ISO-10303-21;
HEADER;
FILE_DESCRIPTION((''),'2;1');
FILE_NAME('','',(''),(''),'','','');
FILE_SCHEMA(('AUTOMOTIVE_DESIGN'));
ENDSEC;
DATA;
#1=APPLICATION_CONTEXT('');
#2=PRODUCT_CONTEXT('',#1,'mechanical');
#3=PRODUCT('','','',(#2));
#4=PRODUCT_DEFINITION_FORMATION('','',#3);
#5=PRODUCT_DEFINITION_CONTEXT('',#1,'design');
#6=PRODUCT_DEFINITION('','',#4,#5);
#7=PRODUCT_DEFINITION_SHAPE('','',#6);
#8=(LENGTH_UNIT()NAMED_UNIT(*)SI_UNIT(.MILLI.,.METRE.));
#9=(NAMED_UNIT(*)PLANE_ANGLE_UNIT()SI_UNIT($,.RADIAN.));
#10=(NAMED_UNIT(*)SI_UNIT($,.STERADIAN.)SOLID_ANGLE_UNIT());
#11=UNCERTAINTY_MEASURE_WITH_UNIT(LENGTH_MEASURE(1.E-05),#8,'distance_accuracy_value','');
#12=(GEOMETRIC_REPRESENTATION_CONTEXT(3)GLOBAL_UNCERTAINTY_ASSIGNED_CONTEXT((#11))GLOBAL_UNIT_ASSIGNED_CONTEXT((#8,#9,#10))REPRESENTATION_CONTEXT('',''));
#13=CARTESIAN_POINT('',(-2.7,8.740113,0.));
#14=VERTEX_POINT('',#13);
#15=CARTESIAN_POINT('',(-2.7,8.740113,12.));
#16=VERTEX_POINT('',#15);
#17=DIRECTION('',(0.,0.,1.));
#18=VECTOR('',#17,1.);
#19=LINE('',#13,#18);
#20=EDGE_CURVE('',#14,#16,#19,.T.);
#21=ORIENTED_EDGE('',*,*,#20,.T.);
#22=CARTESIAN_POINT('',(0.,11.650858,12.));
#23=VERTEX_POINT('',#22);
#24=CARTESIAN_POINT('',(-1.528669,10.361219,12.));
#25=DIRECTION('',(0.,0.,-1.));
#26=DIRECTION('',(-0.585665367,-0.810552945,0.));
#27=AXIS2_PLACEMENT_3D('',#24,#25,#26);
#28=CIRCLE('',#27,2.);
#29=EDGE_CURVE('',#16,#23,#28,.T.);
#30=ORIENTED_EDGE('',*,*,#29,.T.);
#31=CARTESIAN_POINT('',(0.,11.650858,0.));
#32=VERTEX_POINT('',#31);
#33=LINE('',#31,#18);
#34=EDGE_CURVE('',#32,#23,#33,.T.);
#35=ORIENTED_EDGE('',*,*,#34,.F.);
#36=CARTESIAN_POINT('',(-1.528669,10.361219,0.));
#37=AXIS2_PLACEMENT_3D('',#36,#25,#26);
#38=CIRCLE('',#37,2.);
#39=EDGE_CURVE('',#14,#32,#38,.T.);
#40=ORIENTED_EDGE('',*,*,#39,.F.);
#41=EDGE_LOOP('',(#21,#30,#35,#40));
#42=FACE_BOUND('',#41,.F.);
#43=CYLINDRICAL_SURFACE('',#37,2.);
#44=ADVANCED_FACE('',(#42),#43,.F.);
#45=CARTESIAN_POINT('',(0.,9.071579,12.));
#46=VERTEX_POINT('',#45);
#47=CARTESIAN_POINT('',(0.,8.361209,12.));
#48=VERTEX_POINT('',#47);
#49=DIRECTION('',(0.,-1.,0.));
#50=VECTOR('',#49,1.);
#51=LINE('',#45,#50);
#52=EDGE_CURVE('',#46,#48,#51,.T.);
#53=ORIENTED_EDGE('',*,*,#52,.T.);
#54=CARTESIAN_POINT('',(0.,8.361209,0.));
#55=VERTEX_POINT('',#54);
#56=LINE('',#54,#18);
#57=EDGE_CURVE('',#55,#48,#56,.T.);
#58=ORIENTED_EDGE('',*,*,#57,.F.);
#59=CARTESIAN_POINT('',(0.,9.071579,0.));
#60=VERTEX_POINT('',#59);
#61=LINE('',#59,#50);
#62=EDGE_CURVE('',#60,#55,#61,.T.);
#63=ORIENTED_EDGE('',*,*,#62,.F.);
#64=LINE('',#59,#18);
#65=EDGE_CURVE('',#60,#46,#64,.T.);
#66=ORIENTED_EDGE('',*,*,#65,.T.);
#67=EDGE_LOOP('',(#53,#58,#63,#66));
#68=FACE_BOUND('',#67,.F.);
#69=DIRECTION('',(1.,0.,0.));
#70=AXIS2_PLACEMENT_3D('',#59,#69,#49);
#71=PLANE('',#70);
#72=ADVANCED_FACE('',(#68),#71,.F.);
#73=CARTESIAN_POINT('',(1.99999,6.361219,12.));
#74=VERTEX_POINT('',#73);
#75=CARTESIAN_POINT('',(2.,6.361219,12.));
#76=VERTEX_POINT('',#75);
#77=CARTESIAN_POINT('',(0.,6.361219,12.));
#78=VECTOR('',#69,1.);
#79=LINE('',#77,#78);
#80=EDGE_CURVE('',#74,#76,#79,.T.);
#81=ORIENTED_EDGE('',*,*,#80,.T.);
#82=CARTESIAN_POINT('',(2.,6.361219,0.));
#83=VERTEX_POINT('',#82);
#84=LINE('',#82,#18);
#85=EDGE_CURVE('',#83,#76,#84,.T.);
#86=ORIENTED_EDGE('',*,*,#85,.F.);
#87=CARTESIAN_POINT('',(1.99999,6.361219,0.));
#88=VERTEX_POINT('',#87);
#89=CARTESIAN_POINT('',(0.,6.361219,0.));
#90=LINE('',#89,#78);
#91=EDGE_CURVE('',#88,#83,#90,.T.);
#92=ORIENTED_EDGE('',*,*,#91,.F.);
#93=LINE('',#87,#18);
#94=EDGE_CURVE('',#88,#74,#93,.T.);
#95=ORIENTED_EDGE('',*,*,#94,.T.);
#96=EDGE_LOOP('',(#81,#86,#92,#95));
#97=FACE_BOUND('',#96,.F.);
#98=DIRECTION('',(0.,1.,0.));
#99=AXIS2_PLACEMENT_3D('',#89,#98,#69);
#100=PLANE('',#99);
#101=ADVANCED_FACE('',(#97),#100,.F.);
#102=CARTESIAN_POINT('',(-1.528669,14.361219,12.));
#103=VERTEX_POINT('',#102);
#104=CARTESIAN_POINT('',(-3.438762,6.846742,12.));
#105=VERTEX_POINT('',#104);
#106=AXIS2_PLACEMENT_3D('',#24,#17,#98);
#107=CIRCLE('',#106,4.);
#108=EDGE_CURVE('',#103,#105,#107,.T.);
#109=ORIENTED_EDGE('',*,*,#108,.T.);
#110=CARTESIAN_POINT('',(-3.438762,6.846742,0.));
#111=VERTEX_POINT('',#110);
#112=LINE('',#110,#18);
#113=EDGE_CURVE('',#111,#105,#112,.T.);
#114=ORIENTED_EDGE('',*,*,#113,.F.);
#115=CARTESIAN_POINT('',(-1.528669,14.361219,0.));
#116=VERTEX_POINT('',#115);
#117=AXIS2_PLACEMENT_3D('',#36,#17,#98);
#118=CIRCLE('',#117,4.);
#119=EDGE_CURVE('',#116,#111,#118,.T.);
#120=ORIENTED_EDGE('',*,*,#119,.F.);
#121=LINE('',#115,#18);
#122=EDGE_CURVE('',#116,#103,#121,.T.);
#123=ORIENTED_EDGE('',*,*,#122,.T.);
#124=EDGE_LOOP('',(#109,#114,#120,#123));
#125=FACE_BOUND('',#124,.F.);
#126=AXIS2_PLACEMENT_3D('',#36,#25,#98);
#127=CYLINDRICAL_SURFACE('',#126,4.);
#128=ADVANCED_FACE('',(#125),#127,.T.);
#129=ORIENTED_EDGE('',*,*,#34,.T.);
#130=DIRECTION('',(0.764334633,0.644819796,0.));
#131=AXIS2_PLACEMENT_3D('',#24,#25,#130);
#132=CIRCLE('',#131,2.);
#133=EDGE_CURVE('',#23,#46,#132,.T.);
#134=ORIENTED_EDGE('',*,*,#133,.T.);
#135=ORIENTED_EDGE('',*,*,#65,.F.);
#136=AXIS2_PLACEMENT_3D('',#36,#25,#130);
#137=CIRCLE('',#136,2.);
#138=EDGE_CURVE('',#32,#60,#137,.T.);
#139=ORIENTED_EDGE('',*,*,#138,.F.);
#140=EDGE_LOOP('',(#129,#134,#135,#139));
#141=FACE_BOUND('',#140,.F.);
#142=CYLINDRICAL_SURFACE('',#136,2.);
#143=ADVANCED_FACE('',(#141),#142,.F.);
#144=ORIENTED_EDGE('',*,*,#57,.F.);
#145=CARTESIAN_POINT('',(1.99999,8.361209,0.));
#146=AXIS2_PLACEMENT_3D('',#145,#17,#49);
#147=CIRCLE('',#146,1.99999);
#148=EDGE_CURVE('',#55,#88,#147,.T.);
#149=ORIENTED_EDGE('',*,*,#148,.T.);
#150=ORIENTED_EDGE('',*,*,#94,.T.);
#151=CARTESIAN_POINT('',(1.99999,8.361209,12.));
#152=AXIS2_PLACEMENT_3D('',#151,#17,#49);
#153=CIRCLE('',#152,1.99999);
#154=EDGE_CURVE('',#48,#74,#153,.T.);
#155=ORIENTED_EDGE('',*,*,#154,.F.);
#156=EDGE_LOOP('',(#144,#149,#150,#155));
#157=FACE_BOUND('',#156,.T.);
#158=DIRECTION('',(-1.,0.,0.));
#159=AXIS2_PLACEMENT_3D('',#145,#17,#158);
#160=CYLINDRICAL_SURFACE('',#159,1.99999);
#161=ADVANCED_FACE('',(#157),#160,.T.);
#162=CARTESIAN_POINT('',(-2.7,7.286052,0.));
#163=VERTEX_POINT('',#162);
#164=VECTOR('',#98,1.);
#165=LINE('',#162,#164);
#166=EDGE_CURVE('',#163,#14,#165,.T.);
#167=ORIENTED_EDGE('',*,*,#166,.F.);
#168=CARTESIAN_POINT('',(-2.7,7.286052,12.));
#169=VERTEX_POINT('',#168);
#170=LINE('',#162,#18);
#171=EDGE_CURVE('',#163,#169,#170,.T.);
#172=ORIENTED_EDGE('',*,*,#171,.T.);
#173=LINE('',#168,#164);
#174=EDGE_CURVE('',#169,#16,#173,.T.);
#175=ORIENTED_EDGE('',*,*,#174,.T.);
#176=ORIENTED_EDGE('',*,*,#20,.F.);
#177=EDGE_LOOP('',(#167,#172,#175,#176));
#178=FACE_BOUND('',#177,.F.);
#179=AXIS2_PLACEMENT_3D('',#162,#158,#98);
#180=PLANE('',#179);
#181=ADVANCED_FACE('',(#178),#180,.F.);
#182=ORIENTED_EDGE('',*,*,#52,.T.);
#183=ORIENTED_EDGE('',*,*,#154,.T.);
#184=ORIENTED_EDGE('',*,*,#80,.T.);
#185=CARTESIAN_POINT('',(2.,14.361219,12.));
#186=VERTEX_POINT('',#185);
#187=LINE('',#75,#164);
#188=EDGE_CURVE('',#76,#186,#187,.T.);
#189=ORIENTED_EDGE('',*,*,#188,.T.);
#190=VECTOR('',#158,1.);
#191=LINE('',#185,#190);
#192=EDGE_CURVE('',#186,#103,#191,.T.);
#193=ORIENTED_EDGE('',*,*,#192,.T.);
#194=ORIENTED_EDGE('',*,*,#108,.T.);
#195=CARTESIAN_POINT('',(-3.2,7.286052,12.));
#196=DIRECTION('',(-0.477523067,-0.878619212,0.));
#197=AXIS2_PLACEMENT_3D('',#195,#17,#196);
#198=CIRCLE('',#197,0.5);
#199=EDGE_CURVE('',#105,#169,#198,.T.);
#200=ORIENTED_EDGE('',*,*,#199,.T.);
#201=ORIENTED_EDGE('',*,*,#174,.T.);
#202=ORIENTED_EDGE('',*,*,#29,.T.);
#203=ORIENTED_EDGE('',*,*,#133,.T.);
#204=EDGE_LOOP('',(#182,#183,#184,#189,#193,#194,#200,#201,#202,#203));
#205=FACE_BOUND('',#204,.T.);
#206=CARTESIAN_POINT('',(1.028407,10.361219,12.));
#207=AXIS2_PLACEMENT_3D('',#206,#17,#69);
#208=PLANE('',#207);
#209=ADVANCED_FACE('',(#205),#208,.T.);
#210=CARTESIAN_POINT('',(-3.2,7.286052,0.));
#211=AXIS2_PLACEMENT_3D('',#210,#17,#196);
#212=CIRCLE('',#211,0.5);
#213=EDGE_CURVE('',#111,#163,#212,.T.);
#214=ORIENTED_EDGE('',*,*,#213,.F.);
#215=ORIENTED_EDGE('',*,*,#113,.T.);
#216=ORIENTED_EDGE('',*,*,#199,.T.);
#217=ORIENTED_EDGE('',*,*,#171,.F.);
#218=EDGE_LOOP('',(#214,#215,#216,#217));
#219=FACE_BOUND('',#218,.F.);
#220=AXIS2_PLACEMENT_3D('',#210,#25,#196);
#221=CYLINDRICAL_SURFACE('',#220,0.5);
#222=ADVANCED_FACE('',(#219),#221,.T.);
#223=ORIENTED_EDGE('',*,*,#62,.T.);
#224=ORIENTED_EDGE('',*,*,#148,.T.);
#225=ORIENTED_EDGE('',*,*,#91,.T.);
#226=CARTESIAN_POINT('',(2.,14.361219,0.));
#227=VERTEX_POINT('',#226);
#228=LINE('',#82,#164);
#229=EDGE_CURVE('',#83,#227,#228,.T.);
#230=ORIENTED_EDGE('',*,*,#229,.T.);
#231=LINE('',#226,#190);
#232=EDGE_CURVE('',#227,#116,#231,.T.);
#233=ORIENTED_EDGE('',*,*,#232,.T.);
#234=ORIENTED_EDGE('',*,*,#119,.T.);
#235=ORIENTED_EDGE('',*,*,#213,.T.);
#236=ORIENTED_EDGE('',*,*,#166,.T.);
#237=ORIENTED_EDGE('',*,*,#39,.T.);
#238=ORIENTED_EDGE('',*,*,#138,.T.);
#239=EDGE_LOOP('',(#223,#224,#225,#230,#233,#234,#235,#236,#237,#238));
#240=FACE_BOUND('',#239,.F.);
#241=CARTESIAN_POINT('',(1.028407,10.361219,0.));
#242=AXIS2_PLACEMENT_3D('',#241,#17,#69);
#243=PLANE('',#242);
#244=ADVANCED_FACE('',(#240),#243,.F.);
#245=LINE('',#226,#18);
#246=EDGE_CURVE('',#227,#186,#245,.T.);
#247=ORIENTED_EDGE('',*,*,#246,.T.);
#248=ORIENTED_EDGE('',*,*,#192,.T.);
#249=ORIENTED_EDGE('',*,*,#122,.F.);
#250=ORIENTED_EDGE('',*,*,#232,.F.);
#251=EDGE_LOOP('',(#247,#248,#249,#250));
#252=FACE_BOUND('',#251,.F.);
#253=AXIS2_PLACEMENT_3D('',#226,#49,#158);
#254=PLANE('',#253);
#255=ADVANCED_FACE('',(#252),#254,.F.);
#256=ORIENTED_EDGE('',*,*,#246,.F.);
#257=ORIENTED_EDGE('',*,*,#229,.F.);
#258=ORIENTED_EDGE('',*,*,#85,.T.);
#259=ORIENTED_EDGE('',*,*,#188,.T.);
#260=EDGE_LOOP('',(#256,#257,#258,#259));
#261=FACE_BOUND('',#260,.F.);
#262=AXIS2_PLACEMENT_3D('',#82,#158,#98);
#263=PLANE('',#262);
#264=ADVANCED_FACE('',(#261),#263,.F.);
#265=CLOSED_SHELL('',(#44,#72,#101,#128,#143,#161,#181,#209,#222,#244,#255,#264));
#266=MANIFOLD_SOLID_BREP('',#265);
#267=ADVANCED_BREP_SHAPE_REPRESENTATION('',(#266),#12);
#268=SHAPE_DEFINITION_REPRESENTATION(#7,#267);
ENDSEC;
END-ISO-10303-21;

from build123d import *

# Parameters (mm, degrees)
F1_DEPTH = 12
F2_R     = 1.99999


# Not quite as in the source:
# - a fillet or chamfer is up to 0.001 mm smaller than in the source, because OpenCascade refuses the exact size
# - a feature names something its author has since deleted; it is built from what else it names


with BuildPart() as f1:
    # F0 (on Top) → F1 (new body)
    with BuildSketch(Plane.XY):
        with BuildLine():
            Line((2, 14.3612188522), (0, 14.3612188522))
            Line((0, 14.3612188522), (0, 11.6508584444))
            ThreePointArc((0, 11.6508584444), (0.4713307349, 10.3612188522), (0, 9.0715792599))
            Line((0, 9.0715792599), (0, 6.3612188522))
            Line((0, 6.3612188522), (2, 6.3612188522))
            Line((2, 6.3612188522), (2, 14.3612188522))
        make_face()
        with BuildLine():
            Line((0, 11.6508584444), (0, 14.3612188522))
            Line((0, 14.3612188522), (-1.5286692651, 14.3612188522))
            ThreePointArc((-1.5286692651, 14.3612188522), (-5.4053887158, 11.346635668), (-3.4387615336, 6.8467420026))
            ThreePointArc((-3.4387615336, 6.8467420026), (-2.9444425376, 6.8562954182), (-2.7, 7.2860516088))
            Line((-2.7, 7.2860516088), (-2.7, 8.7401129613))
            ThreePointArc((-2.7, 8.7401129613), (-2.9949681852, 11.7213539472), (0, 11.6508584444))
        make_face()
    extrude(amount=F1_DEPTH)

    # F2 (radius 2 in the source; OpenCascade refuses exactly that, so slightly less here)
    f2_edges = [f1.edges().sort_by_distance(p)[0] for p in [
        (0, 6.361219, 6),
    ]]
    fillet(f2_edges, radius=F2_R)


solid = f1.part
